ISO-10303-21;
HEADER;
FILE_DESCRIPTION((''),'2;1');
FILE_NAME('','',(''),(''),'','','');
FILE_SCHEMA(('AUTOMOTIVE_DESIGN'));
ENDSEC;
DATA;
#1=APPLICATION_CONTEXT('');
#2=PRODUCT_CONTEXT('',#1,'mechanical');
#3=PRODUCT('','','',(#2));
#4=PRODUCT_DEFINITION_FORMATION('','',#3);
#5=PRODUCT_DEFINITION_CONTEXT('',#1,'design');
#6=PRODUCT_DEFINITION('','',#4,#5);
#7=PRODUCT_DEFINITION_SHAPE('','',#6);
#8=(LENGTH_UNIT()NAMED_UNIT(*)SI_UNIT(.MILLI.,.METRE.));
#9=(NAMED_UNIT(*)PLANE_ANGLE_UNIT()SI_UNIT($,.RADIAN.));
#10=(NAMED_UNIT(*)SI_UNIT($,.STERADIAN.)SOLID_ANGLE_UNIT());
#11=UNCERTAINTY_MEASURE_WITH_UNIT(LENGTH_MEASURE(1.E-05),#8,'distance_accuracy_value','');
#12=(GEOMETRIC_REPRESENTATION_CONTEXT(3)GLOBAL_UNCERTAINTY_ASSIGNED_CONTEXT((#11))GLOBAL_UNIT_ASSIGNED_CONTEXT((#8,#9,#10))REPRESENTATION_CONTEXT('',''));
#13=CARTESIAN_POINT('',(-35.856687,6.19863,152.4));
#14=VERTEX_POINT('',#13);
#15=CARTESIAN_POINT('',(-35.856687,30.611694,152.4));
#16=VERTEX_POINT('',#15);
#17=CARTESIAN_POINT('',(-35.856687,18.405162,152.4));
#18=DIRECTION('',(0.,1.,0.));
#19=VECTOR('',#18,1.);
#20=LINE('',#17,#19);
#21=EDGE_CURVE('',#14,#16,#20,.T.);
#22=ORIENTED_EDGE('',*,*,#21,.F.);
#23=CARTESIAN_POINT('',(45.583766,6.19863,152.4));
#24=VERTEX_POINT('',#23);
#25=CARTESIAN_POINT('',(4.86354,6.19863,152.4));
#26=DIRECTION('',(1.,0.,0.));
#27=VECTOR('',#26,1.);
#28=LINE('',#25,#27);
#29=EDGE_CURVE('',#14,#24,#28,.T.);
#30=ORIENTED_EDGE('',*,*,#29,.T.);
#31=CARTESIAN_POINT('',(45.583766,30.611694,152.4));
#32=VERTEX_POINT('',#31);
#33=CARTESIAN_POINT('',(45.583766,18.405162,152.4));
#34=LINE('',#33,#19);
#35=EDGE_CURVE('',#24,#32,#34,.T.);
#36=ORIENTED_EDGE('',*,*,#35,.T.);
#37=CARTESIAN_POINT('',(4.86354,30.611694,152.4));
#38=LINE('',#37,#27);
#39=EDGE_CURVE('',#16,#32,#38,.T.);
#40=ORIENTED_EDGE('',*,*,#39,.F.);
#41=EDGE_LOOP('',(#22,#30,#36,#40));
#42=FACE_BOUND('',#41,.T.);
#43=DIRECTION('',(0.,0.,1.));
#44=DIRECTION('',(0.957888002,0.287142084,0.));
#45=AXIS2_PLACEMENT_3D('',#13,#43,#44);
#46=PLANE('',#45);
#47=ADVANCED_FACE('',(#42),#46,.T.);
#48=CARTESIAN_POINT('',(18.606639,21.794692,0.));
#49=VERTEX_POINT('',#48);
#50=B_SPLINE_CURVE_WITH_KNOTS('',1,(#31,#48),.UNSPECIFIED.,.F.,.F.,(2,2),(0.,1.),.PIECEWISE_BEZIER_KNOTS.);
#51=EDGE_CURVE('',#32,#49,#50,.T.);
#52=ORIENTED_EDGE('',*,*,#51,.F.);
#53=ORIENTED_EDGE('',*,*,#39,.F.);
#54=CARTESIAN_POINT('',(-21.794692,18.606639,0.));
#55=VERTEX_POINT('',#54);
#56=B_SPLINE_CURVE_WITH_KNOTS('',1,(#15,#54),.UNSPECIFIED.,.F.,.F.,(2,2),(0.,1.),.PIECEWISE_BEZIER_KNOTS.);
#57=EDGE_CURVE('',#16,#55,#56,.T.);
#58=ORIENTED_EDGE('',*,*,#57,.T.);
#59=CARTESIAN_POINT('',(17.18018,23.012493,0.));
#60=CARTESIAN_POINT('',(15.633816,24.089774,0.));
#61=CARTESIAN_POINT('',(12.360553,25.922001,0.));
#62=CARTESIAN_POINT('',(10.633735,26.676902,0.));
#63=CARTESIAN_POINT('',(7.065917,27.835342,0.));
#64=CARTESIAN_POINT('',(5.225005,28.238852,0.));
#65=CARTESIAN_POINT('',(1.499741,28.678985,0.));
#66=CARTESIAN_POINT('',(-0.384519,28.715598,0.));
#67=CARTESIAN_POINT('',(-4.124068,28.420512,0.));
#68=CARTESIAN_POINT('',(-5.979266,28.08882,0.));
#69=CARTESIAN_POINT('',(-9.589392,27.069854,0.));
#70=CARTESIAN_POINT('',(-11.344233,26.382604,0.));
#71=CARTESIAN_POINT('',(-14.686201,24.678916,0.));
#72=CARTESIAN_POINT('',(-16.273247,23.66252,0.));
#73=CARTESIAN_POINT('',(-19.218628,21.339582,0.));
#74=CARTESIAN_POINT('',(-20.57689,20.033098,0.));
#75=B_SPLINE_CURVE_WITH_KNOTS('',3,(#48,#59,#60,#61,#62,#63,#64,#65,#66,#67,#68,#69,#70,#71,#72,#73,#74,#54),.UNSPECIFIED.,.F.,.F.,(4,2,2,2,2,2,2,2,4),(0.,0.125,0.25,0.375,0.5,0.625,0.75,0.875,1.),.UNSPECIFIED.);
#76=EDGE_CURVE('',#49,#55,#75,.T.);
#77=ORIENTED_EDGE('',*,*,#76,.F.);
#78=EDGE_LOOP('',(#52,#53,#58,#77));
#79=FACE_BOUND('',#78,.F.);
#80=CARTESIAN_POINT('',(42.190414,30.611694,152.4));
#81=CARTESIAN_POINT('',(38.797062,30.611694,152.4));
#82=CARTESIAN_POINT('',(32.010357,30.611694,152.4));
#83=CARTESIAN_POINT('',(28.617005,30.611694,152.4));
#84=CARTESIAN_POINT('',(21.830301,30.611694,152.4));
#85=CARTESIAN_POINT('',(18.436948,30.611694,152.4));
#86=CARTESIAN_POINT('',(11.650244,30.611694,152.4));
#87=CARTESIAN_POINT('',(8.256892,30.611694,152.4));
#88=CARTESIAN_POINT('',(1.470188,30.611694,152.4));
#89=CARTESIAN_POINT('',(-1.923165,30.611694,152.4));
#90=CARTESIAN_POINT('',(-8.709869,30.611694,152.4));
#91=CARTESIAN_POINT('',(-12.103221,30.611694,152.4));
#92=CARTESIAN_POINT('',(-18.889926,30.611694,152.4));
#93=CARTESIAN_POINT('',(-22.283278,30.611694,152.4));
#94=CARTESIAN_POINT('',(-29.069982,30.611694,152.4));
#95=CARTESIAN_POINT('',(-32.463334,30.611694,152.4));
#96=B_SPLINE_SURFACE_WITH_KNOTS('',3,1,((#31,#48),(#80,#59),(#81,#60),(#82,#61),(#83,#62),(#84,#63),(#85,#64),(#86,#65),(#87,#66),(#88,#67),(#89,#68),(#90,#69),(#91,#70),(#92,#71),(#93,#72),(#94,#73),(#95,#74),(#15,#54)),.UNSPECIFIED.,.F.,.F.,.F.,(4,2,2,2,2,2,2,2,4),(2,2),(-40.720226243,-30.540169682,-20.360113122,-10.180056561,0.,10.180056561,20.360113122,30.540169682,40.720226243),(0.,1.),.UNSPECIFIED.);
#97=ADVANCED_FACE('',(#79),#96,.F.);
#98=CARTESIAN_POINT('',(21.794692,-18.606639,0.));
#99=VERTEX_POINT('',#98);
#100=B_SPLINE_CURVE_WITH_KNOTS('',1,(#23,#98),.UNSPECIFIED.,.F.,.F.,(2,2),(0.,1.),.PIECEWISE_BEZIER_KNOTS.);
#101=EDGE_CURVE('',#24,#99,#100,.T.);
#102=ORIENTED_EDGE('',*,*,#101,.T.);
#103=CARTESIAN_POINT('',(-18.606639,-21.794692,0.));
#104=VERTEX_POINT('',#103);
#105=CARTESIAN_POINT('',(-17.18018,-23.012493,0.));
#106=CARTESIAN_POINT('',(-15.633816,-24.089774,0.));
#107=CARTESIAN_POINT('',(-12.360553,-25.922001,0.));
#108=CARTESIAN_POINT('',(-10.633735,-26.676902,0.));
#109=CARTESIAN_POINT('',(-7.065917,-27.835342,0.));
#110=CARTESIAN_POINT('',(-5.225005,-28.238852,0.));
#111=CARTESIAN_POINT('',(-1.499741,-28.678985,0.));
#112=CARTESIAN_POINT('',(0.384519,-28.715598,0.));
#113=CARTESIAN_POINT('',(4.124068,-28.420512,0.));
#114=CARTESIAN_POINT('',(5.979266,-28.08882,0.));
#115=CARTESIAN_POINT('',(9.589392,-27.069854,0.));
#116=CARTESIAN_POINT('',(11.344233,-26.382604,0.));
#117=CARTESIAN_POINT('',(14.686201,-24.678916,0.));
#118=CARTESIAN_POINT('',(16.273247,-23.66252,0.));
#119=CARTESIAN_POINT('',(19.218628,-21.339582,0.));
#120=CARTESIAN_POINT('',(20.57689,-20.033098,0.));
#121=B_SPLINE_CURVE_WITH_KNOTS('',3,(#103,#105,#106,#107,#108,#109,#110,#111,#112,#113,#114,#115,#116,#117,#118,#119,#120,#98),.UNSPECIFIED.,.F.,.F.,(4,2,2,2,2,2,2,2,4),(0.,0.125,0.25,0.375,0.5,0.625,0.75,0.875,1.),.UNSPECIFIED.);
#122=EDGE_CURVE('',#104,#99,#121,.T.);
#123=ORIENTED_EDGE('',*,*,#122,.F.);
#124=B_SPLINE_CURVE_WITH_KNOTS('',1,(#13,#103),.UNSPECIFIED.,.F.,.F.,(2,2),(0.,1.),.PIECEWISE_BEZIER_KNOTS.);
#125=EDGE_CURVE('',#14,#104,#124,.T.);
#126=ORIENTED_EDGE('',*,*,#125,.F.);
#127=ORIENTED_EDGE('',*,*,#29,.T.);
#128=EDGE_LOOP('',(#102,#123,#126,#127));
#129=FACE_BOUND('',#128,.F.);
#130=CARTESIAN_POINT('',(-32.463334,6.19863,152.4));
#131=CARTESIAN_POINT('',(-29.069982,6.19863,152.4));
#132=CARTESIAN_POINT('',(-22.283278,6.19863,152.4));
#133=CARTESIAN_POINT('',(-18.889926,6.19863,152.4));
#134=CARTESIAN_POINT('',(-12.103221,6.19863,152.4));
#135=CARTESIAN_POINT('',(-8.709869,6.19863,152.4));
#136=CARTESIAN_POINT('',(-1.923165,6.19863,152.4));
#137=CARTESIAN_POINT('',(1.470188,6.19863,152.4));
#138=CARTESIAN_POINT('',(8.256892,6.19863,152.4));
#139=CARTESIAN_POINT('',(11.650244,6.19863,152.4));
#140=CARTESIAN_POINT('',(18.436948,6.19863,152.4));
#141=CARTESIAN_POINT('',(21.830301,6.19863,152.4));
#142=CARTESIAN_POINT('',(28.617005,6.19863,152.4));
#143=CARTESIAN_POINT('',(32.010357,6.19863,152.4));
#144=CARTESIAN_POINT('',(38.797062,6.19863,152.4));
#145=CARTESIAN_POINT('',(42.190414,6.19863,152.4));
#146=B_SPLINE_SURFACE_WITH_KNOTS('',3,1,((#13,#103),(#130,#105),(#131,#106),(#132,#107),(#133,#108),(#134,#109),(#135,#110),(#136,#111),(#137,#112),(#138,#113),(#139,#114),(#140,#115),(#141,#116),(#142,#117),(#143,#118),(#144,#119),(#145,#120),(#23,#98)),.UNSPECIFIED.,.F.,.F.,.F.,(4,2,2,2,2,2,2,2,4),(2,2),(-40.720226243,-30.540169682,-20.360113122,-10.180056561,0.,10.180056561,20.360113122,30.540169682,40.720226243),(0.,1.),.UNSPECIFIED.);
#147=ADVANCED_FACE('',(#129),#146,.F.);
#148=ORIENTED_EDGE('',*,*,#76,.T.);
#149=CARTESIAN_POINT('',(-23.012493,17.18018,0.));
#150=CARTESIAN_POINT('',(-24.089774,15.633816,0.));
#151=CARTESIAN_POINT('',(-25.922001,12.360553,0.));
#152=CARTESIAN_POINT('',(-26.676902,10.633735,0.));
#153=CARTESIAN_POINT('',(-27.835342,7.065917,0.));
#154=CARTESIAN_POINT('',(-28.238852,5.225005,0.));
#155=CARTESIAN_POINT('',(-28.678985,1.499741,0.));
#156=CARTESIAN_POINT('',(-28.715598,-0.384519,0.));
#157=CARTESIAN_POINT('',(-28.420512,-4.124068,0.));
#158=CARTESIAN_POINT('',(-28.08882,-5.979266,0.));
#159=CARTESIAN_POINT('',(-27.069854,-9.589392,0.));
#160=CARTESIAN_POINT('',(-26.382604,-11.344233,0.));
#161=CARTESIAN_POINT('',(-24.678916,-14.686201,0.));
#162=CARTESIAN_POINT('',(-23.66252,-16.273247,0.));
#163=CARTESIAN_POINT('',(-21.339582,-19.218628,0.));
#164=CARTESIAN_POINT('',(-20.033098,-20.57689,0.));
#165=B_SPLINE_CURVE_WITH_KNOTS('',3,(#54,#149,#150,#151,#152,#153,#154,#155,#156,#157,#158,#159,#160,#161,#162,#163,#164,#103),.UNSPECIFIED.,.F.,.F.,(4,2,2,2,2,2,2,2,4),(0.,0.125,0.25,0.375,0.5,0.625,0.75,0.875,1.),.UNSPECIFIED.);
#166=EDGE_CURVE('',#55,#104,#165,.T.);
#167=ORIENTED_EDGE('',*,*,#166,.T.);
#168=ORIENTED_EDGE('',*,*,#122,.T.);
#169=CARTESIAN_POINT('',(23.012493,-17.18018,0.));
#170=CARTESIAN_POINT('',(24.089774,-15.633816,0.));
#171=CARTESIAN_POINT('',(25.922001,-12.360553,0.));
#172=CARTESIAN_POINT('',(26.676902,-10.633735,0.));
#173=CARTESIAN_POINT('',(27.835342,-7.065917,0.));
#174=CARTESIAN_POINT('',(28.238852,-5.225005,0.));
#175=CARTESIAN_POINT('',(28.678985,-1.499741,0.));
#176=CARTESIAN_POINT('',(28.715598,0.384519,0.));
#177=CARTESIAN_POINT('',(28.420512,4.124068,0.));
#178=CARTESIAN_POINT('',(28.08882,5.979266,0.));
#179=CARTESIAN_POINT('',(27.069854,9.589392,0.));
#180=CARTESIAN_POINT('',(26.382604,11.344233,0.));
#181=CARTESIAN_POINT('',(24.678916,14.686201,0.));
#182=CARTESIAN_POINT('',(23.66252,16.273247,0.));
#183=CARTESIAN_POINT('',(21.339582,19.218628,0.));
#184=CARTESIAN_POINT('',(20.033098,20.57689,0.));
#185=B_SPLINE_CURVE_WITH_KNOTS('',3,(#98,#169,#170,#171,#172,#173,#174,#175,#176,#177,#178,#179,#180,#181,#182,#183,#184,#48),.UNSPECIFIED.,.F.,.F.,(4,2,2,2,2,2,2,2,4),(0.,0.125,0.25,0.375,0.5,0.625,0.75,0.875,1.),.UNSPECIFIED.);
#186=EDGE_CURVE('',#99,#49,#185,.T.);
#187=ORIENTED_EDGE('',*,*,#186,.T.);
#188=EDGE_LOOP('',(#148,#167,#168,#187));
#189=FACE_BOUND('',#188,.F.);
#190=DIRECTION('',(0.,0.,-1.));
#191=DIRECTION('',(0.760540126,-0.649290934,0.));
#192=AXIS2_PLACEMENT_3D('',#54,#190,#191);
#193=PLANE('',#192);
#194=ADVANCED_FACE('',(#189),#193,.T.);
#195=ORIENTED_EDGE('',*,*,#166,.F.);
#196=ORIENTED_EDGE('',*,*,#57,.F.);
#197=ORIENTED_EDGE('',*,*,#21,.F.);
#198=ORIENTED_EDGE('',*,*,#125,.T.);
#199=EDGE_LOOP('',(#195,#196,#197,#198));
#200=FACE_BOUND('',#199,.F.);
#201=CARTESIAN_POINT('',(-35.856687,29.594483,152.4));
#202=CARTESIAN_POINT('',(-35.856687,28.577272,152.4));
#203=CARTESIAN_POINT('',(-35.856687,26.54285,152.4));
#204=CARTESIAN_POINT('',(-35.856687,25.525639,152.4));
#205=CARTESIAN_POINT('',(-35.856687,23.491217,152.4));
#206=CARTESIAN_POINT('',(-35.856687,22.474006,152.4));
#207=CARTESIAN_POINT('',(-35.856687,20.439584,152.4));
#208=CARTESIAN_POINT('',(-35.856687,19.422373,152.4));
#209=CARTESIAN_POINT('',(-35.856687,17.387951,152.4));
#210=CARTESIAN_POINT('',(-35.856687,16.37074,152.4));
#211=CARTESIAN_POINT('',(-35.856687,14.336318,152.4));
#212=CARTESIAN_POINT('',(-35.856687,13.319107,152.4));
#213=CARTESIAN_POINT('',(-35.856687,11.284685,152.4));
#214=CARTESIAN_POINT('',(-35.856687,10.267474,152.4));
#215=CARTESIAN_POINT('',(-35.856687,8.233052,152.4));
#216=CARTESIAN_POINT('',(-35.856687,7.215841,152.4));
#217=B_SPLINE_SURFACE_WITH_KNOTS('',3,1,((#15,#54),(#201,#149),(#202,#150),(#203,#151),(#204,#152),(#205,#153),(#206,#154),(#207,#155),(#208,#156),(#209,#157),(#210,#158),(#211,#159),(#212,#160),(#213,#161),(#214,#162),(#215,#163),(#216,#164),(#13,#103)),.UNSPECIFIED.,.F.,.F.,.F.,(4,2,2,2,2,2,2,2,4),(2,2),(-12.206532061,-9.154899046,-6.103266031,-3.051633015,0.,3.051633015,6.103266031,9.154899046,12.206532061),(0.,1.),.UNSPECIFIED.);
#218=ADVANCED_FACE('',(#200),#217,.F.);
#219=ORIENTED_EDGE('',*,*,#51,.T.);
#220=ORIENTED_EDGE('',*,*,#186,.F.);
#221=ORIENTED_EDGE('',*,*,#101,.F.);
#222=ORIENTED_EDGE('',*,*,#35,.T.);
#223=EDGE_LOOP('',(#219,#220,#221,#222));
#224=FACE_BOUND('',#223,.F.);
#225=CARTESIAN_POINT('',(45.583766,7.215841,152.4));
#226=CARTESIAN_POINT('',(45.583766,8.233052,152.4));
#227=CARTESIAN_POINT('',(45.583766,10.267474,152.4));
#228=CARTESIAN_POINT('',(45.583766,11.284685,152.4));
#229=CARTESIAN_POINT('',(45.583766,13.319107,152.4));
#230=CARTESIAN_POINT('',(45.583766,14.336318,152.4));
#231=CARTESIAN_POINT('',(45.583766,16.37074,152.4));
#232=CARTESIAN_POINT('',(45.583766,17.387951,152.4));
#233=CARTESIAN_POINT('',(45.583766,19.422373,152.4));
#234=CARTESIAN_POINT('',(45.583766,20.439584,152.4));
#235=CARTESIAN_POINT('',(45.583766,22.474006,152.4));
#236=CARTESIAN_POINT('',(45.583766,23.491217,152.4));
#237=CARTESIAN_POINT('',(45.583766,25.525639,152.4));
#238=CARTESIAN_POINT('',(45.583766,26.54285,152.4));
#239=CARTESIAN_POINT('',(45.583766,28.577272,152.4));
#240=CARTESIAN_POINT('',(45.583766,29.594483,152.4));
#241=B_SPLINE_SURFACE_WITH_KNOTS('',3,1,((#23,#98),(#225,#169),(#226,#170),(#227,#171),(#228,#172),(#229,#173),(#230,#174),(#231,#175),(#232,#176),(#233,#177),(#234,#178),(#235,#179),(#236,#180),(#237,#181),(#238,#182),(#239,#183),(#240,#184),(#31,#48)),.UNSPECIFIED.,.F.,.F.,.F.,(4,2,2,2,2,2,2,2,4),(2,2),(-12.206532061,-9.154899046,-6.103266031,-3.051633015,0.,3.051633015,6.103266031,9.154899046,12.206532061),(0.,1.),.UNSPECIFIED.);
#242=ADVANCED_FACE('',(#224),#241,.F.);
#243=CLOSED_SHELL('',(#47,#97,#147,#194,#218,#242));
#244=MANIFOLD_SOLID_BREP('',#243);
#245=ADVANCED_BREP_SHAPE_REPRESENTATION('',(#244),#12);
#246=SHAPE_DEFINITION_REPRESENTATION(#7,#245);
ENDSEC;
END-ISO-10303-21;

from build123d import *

# Parameters (mm, degrees)
F2_W = 81.4404524863
F2_H = 24.4130641222


# Not quite as in the source:
# - the arcs of a loft's sections are written as splines that run evenly, so that the points pair up as in the source's solid


with BuildPart() as f3:
    # F2 (on offset) → F3 section 0
    with BuildSketch(Plane.XY.offset(152.4)):
        with Locations((4.8635397106, 18.405161798)):
            Rectangle(F2_W, F2_H)
    # F0 (on Top) → F3 section 1
    with BuildSketch(Plane.XY):
        with BuildLine():
            add(Edge.make_bspline(
                [(-21.7946915268, 18.6066390761), (-23.0124932066, 17.1801798513), (-24.089774277, 15.6338158679), (-25.9220014219, 12.3605528028), (-26.6769021911, 10.6337346588), (-27.8353416598, 7.0659166419), (-28.2388517146, 5.2250049902), (-28.6789853279, 1.4997412671), (-28.7155980033, -0.3845186899), (-28.4205116733, -4.1240683236), (-28.0888199645, -5.9792655325), (-27.0698536934, -9.5893922813), (-26.382604327, -11.3442325538), (-24.6789164171, -14.6862012715), (-23.6625200007, -16.27324708), (-21.3395822229, -19.2186277829), (-20.0330983008, -20.5768898471), (-18.6066390761, -21.7946915268)],
                knots=[0, 0, 0, 0, 0.125, 0.125, 0.25, 0.25, 0.375, 0.375, 0.5, 0.5, 0.625, 0.625, 0.75, 0.75, 0.875, 0.875, 1, 1, 1, 1], degree=3))
            add(Edge.make_bspline(
                [(-18.6066390761, -21.7946915268), (-17.1801798513, -23.0124932066), (-15.6338158679, -24.089774277), (-12.3605528028, -25.9220014219), (-10.6337346588, -26.6769021911), (-7.0659166419, -27.8353416598), (-5.2250049902, -28.2388517146), (-1.4997412671, -28.6789853279), (0.3845186899, -28.7155980033), (4.1240683236, -28.4205116733), (5.9792655325, -28.0888199645), (9.5893922813, -27.0698536934), (11.3442325538, -26.382604327), (14.6862012715, -24.6789164171), (16.27324708, -23.6625200007), (19.2186277829, -21.3395822229), (20.5768898471, -20.0330983008), (21.7946915268, -18.6066390761)],
                knots=[0, 0, 0, 0, 0.125, 0.125, 0.25, 0.25, 0.375, 0.375, 0.5, 0.5, 0.625, 0.625, 0.75, 0.75, 0.875, 0.875, 1, 1, 1, 1], degree=3))
            add(Edge.make_bspline(
                [(21.7946915268, -18.6066390761), (23.0124932066, -17.1801798513), (24.089774277, -15.6338158679), (25.9220014219, -12.3605528028), (26.6769021911, -10.6337346588), (27.8353416598, -7.0659166419), (28.2388517146, -5.2250049902), (28.6789853279, -1.4997412671), (28.7155980033, 0.3845186899), (28.4205116733, 4.1240683236), (28.0888199645, 5.9792655325), (27.0698536934, 9.5893922813), (26.382604327, 11.3442325538), (24.6789164171, 14.6862012715), (23.6625200007, 16.27324708), (21.3395822229, 19.2186277829), (20.0330983008, 20.5768898471), (18.6066390761, 21.7946915268)],
                knots=[0, 0, 0, 0, 0.125, 0.125, 0.25, 0.25, 0.375, 0.375, 0.5, 0.5, 0.625, 0.625, 0.75, 0.75, 0.875, 0.875, 1, 1, 1, 1], degree=3))
            add(Edge.make_bspline(
                [(18.6066390761, 21.7946915268), (17.1801798513, 23.0124932066), (15.6338158679, 24.089774277), (12.3605528028, 25.9220014219), (10.6337346588, 26.6769021911), (7.0659166419, 27.8353416598), (5.2250049902, 28.2388517146), (1.4997412671, 28.6789853279), (-0.3845186899, 28.7155980033), (-4.1240683236, 28.4205116733), (-5.9792655325, 28.0888199645), (-9.5893922813, 27.0698536934), (-11.3442325538, 26.382604327), (-14.6862012715, 24.6789164171), (-16.27324708, 23.6625200007), (-19.2186277829, 21.3395822229), (-20.5768898471, 20.0330983008), (-21.7946915268, 18.6066390761)],
                knots=[0, 0, 0, 0, 0.125, 0.125, 0.25, 0.25, 0.375, 0.375, 0.5, 0.5, 0.625, 0.625, 0.75, 0.75, 0.875, 0.875, 1, 1, 1, 1], degree=3))
        make_face()
    loft(ruled=True)


solid = f3.part
